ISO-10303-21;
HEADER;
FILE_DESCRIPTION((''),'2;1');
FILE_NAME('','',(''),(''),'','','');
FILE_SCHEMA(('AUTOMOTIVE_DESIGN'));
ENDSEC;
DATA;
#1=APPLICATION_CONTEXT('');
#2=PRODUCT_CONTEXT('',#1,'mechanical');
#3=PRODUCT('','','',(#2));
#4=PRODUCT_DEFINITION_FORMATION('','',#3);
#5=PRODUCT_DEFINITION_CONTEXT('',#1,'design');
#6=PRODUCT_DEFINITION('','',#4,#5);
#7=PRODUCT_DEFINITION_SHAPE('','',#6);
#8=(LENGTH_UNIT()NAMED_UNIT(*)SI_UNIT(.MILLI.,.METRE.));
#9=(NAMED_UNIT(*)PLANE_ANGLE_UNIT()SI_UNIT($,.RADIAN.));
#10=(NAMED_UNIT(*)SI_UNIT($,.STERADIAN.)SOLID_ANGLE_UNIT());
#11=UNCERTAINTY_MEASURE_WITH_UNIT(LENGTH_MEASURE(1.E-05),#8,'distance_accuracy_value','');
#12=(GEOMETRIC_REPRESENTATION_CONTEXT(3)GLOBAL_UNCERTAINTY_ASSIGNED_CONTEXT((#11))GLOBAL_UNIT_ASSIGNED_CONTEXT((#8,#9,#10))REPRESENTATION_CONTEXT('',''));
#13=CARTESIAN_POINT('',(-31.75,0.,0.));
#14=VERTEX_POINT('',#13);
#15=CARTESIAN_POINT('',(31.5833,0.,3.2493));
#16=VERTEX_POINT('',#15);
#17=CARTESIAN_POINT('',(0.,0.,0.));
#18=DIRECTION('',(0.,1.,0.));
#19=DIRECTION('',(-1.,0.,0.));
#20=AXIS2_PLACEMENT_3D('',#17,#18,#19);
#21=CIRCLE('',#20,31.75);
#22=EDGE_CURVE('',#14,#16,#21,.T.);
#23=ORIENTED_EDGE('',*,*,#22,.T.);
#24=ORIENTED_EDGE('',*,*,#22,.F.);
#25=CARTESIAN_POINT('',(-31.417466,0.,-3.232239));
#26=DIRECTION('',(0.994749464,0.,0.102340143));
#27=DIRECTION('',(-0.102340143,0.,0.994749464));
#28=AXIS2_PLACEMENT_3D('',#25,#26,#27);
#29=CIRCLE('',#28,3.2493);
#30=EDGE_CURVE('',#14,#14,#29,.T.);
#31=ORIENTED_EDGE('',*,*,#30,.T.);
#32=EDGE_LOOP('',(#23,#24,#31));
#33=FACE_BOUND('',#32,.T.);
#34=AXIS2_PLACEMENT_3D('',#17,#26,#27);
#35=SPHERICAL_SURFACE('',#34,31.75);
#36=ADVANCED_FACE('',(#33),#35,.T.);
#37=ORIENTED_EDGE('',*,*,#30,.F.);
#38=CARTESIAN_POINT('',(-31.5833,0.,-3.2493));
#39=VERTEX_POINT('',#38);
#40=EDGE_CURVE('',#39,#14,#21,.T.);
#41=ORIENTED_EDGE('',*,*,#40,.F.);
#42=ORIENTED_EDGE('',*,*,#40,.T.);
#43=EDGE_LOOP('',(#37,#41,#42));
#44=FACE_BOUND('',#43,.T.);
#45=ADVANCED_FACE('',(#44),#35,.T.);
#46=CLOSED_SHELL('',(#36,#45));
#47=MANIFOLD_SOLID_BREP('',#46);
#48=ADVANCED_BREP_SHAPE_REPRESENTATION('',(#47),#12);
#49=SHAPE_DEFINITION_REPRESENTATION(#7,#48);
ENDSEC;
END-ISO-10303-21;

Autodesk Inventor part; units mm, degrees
ref_plane "YZ Plane" through (0, 0, 0) normal (1, 0, 0) x (0, 1, 0)
ref_plane "XZ Plane" through (0, 0, 0) normal (0, 1, 0) x (-1, 0, 0)
ref_plane "XY Plane" through (0, 0, 0) normal (0, 0, 1) x (1, 0, 0)
sketch "Sketch1" plane through (0, 0, 0) normal (0, 1, 0) x (-1, 0, 0)
  circle A0 centre (0, 0) radius 31.75
  line L0 (31.5833, -3.2493) -> (-31.5833, 3.2493)
  dimension "LightBulb_MinSize" = 63.5
revolve "Revolution1" add sketch "Sketch1" angle 360 about axis through (-31.5833, 0, -3.2493) along (0.9947494, 0, 0.1023405) picked at (2.5389, 17.8193) contours A0 L0
properties part number "LightBulb" material "Rubber"
